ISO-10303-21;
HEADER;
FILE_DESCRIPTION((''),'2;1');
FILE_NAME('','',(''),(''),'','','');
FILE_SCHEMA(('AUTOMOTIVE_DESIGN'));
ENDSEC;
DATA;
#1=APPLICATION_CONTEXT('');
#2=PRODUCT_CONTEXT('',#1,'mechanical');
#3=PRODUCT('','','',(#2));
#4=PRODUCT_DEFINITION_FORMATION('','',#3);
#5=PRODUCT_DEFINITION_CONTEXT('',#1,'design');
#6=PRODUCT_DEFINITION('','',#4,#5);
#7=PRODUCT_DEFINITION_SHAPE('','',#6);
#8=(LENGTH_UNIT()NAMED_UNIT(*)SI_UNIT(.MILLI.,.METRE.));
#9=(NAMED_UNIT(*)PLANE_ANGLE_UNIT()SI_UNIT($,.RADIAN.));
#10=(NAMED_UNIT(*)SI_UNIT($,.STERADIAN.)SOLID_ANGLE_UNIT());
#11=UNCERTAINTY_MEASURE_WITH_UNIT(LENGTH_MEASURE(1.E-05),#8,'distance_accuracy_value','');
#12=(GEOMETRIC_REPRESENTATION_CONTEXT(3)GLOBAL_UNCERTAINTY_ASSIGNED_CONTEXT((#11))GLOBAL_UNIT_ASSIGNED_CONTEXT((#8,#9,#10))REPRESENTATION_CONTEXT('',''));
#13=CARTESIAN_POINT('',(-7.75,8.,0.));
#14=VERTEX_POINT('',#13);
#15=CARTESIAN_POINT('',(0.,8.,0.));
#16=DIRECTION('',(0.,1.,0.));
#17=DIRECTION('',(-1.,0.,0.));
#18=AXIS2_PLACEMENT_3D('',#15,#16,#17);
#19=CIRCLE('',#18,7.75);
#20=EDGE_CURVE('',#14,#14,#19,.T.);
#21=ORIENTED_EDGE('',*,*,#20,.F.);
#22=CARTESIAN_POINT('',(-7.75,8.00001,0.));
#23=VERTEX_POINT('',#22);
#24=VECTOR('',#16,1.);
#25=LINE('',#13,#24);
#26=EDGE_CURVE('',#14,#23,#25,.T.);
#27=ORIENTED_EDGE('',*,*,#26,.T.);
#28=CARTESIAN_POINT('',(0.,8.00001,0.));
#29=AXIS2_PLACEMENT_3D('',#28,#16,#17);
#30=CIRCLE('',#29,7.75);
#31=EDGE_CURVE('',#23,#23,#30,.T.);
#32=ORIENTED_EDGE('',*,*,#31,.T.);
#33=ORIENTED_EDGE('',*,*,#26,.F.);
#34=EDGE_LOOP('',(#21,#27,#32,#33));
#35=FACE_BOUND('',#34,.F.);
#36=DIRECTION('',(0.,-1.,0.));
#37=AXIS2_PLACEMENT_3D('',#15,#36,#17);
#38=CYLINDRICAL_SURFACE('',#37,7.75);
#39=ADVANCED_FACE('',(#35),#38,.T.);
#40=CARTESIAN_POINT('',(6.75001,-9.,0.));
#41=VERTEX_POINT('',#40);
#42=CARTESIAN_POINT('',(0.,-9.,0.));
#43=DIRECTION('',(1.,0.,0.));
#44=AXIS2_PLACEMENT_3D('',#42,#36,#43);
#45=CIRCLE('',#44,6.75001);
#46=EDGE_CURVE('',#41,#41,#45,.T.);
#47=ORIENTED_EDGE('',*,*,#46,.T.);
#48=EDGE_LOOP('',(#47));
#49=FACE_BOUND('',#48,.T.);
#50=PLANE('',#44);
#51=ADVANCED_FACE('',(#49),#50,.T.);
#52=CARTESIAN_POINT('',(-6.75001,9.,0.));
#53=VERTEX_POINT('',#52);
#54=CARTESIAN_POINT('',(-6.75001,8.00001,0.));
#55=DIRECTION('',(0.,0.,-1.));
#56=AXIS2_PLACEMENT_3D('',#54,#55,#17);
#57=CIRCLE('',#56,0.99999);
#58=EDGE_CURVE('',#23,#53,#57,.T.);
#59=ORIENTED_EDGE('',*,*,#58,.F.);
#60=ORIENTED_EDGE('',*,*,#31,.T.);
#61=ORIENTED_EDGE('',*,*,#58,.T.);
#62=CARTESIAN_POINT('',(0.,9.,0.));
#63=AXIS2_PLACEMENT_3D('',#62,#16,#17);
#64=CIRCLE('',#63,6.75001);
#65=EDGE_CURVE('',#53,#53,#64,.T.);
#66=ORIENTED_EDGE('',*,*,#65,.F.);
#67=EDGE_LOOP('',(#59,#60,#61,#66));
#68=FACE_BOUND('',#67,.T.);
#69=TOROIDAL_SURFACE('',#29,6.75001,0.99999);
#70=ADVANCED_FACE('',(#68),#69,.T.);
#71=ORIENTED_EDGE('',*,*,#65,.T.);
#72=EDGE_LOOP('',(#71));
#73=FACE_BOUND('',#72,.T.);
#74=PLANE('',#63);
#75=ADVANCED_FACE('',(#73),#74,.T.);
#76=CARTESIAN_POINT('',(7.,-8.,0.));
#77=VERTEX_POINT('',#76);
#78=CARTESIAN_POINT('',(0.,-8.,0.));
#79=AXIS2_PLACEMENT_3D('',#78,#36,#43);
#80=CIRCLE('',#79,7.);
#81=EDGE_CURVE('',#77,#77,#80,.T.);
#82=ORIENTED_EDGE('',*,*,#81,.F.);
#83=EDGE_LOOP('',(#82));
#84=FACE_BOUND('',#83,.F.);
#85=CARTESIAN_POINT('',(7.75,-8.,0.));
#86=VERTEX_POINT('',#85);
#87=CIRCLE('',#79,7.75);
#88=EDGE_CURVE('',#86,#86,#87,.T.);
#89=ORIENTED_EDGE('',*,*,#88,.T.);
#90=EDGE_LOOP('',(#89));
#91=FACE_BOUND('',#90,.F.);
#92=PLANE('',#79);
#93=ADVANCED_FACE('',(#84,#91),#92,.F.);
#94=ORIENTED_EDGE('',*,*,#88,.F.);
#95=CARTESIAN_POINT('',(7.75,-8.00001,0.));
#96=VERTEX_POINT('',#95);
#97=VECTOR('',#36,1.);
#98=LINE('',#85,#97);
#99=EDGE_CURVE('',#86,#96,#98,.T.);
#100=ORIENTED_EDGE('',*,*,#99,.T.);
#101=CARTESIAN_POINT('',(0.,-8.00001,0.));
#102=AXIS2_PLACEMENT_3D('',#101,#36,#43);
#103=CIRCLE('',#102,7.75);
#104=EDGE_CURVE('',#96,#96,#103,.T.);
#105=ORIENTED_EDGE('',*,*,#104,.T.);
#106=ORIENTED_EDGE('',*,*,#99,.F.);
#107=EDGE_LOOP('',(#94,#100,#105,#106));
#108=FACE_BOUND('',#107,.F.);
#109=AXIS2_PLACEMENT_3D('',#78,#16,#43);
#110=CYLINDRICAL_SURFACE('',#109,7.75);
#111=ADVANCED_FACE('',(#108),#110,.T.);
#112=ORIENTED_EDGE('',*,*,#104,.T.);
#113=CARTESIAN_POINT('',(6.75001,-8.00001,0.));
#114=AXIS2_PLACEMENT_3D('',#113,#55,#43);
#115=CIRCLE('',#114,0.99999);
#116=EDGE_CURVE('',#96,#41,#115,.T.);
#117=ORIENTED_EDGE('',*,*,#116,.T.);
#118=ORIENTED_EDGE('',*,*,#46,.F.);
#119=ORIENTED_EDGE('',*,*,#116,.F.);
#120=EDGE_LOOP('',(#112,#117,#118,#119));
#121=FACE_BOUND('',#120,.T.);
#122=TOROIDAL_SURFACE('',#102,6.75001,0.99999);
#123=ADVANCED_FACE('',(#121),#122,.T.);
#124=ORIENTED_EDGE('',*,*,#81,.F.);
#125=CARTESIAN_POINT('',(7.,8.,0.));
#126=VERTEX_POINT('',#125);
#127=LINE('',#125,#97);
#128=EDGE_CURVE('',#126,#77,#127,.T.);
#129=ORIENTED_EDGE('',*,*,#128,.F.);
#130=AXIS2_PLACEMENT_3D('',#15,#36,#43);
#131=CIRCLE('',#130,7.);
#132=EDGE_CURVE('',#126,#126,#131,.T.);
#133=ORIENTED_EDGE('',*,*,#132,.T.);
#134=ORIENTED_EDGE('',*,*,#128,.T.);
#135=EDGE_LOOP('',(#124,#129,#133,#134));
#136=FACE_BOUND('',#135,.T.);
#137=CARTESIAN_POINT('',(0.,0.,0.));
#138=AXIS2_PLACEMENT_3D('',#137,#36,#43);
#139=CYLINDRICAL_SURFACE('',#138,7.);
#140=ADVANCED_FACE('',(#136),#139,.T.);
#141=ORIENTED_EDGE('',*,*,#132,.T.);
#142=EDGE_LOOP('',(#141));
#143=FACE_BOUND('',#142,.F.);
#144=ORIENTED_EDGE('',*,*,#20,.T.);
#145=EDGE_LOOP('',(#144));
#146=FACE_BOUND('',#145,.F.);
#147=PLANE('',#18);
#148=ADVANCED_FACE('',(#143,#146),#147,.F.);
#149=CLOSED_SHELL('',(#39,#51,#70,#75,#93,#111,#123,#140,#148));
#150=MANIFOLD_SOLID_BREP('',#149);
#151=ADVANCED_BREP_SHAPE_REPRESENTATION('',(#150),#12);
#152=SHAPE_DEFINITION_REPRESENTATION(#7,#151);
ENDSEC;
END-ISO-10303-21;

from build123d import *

# Parameters (mm, degrees)
F0_R     = 7
F1_DEPTH = 8
F2_R     = 7.75
F2_R_2   = 7
F3_DEPTH = 1
F4_R     = 7.75
F4_R_2   = 7
F5_DEPTH = 1
F6_R     = 0.99999


# Not quite as in the source:
# - a fillet or chamfer is up to 0.001 mm smaller than in the source, because OpenCascade refuses the exact size


with BuildPart() as f1:
    # F0 (on Front) → F1 (new body, symmetric)
    with BuildSketch(Plane.XZ):
        Circle(F0_R)
    extrude(amount=F1_DEPTH, both=True)

    # F2 (on face) → F3 (join)
    with BuildSketch(Plane.XZ.offset(8)):
        Circle(F2_R)
        Circle(F2_R_2, mode=Mode.SUBTRACT)
        Circle(F2_R_2)
    extrude(amount=F3_DEPTH)

    # F4 (on face) → F5 (join)
    with BuildSketch(Plane(origin=(0, 8, 0), x_dir=(-1, 0, 0), z_dir=(0, 1, 0))):
        Circle(F4_R)
        Circle(F4_R_2, mode=Mode.SUBTRACT)
        Circle(F4_R_2)
    extrude(amount=F5_DEPTH)

    # F6 (radius 1 in the source; OpenCascade refuses exactly that, so slightly less here)
    f6_edges = [f1.edges().sort_by_distance(p)[0] for p in [
        (-7.75, -9, 0),
        (7.75, 9, 0),
    ]]
    fillet(f6_edges, radius=F6_R)


solid = f1.part
